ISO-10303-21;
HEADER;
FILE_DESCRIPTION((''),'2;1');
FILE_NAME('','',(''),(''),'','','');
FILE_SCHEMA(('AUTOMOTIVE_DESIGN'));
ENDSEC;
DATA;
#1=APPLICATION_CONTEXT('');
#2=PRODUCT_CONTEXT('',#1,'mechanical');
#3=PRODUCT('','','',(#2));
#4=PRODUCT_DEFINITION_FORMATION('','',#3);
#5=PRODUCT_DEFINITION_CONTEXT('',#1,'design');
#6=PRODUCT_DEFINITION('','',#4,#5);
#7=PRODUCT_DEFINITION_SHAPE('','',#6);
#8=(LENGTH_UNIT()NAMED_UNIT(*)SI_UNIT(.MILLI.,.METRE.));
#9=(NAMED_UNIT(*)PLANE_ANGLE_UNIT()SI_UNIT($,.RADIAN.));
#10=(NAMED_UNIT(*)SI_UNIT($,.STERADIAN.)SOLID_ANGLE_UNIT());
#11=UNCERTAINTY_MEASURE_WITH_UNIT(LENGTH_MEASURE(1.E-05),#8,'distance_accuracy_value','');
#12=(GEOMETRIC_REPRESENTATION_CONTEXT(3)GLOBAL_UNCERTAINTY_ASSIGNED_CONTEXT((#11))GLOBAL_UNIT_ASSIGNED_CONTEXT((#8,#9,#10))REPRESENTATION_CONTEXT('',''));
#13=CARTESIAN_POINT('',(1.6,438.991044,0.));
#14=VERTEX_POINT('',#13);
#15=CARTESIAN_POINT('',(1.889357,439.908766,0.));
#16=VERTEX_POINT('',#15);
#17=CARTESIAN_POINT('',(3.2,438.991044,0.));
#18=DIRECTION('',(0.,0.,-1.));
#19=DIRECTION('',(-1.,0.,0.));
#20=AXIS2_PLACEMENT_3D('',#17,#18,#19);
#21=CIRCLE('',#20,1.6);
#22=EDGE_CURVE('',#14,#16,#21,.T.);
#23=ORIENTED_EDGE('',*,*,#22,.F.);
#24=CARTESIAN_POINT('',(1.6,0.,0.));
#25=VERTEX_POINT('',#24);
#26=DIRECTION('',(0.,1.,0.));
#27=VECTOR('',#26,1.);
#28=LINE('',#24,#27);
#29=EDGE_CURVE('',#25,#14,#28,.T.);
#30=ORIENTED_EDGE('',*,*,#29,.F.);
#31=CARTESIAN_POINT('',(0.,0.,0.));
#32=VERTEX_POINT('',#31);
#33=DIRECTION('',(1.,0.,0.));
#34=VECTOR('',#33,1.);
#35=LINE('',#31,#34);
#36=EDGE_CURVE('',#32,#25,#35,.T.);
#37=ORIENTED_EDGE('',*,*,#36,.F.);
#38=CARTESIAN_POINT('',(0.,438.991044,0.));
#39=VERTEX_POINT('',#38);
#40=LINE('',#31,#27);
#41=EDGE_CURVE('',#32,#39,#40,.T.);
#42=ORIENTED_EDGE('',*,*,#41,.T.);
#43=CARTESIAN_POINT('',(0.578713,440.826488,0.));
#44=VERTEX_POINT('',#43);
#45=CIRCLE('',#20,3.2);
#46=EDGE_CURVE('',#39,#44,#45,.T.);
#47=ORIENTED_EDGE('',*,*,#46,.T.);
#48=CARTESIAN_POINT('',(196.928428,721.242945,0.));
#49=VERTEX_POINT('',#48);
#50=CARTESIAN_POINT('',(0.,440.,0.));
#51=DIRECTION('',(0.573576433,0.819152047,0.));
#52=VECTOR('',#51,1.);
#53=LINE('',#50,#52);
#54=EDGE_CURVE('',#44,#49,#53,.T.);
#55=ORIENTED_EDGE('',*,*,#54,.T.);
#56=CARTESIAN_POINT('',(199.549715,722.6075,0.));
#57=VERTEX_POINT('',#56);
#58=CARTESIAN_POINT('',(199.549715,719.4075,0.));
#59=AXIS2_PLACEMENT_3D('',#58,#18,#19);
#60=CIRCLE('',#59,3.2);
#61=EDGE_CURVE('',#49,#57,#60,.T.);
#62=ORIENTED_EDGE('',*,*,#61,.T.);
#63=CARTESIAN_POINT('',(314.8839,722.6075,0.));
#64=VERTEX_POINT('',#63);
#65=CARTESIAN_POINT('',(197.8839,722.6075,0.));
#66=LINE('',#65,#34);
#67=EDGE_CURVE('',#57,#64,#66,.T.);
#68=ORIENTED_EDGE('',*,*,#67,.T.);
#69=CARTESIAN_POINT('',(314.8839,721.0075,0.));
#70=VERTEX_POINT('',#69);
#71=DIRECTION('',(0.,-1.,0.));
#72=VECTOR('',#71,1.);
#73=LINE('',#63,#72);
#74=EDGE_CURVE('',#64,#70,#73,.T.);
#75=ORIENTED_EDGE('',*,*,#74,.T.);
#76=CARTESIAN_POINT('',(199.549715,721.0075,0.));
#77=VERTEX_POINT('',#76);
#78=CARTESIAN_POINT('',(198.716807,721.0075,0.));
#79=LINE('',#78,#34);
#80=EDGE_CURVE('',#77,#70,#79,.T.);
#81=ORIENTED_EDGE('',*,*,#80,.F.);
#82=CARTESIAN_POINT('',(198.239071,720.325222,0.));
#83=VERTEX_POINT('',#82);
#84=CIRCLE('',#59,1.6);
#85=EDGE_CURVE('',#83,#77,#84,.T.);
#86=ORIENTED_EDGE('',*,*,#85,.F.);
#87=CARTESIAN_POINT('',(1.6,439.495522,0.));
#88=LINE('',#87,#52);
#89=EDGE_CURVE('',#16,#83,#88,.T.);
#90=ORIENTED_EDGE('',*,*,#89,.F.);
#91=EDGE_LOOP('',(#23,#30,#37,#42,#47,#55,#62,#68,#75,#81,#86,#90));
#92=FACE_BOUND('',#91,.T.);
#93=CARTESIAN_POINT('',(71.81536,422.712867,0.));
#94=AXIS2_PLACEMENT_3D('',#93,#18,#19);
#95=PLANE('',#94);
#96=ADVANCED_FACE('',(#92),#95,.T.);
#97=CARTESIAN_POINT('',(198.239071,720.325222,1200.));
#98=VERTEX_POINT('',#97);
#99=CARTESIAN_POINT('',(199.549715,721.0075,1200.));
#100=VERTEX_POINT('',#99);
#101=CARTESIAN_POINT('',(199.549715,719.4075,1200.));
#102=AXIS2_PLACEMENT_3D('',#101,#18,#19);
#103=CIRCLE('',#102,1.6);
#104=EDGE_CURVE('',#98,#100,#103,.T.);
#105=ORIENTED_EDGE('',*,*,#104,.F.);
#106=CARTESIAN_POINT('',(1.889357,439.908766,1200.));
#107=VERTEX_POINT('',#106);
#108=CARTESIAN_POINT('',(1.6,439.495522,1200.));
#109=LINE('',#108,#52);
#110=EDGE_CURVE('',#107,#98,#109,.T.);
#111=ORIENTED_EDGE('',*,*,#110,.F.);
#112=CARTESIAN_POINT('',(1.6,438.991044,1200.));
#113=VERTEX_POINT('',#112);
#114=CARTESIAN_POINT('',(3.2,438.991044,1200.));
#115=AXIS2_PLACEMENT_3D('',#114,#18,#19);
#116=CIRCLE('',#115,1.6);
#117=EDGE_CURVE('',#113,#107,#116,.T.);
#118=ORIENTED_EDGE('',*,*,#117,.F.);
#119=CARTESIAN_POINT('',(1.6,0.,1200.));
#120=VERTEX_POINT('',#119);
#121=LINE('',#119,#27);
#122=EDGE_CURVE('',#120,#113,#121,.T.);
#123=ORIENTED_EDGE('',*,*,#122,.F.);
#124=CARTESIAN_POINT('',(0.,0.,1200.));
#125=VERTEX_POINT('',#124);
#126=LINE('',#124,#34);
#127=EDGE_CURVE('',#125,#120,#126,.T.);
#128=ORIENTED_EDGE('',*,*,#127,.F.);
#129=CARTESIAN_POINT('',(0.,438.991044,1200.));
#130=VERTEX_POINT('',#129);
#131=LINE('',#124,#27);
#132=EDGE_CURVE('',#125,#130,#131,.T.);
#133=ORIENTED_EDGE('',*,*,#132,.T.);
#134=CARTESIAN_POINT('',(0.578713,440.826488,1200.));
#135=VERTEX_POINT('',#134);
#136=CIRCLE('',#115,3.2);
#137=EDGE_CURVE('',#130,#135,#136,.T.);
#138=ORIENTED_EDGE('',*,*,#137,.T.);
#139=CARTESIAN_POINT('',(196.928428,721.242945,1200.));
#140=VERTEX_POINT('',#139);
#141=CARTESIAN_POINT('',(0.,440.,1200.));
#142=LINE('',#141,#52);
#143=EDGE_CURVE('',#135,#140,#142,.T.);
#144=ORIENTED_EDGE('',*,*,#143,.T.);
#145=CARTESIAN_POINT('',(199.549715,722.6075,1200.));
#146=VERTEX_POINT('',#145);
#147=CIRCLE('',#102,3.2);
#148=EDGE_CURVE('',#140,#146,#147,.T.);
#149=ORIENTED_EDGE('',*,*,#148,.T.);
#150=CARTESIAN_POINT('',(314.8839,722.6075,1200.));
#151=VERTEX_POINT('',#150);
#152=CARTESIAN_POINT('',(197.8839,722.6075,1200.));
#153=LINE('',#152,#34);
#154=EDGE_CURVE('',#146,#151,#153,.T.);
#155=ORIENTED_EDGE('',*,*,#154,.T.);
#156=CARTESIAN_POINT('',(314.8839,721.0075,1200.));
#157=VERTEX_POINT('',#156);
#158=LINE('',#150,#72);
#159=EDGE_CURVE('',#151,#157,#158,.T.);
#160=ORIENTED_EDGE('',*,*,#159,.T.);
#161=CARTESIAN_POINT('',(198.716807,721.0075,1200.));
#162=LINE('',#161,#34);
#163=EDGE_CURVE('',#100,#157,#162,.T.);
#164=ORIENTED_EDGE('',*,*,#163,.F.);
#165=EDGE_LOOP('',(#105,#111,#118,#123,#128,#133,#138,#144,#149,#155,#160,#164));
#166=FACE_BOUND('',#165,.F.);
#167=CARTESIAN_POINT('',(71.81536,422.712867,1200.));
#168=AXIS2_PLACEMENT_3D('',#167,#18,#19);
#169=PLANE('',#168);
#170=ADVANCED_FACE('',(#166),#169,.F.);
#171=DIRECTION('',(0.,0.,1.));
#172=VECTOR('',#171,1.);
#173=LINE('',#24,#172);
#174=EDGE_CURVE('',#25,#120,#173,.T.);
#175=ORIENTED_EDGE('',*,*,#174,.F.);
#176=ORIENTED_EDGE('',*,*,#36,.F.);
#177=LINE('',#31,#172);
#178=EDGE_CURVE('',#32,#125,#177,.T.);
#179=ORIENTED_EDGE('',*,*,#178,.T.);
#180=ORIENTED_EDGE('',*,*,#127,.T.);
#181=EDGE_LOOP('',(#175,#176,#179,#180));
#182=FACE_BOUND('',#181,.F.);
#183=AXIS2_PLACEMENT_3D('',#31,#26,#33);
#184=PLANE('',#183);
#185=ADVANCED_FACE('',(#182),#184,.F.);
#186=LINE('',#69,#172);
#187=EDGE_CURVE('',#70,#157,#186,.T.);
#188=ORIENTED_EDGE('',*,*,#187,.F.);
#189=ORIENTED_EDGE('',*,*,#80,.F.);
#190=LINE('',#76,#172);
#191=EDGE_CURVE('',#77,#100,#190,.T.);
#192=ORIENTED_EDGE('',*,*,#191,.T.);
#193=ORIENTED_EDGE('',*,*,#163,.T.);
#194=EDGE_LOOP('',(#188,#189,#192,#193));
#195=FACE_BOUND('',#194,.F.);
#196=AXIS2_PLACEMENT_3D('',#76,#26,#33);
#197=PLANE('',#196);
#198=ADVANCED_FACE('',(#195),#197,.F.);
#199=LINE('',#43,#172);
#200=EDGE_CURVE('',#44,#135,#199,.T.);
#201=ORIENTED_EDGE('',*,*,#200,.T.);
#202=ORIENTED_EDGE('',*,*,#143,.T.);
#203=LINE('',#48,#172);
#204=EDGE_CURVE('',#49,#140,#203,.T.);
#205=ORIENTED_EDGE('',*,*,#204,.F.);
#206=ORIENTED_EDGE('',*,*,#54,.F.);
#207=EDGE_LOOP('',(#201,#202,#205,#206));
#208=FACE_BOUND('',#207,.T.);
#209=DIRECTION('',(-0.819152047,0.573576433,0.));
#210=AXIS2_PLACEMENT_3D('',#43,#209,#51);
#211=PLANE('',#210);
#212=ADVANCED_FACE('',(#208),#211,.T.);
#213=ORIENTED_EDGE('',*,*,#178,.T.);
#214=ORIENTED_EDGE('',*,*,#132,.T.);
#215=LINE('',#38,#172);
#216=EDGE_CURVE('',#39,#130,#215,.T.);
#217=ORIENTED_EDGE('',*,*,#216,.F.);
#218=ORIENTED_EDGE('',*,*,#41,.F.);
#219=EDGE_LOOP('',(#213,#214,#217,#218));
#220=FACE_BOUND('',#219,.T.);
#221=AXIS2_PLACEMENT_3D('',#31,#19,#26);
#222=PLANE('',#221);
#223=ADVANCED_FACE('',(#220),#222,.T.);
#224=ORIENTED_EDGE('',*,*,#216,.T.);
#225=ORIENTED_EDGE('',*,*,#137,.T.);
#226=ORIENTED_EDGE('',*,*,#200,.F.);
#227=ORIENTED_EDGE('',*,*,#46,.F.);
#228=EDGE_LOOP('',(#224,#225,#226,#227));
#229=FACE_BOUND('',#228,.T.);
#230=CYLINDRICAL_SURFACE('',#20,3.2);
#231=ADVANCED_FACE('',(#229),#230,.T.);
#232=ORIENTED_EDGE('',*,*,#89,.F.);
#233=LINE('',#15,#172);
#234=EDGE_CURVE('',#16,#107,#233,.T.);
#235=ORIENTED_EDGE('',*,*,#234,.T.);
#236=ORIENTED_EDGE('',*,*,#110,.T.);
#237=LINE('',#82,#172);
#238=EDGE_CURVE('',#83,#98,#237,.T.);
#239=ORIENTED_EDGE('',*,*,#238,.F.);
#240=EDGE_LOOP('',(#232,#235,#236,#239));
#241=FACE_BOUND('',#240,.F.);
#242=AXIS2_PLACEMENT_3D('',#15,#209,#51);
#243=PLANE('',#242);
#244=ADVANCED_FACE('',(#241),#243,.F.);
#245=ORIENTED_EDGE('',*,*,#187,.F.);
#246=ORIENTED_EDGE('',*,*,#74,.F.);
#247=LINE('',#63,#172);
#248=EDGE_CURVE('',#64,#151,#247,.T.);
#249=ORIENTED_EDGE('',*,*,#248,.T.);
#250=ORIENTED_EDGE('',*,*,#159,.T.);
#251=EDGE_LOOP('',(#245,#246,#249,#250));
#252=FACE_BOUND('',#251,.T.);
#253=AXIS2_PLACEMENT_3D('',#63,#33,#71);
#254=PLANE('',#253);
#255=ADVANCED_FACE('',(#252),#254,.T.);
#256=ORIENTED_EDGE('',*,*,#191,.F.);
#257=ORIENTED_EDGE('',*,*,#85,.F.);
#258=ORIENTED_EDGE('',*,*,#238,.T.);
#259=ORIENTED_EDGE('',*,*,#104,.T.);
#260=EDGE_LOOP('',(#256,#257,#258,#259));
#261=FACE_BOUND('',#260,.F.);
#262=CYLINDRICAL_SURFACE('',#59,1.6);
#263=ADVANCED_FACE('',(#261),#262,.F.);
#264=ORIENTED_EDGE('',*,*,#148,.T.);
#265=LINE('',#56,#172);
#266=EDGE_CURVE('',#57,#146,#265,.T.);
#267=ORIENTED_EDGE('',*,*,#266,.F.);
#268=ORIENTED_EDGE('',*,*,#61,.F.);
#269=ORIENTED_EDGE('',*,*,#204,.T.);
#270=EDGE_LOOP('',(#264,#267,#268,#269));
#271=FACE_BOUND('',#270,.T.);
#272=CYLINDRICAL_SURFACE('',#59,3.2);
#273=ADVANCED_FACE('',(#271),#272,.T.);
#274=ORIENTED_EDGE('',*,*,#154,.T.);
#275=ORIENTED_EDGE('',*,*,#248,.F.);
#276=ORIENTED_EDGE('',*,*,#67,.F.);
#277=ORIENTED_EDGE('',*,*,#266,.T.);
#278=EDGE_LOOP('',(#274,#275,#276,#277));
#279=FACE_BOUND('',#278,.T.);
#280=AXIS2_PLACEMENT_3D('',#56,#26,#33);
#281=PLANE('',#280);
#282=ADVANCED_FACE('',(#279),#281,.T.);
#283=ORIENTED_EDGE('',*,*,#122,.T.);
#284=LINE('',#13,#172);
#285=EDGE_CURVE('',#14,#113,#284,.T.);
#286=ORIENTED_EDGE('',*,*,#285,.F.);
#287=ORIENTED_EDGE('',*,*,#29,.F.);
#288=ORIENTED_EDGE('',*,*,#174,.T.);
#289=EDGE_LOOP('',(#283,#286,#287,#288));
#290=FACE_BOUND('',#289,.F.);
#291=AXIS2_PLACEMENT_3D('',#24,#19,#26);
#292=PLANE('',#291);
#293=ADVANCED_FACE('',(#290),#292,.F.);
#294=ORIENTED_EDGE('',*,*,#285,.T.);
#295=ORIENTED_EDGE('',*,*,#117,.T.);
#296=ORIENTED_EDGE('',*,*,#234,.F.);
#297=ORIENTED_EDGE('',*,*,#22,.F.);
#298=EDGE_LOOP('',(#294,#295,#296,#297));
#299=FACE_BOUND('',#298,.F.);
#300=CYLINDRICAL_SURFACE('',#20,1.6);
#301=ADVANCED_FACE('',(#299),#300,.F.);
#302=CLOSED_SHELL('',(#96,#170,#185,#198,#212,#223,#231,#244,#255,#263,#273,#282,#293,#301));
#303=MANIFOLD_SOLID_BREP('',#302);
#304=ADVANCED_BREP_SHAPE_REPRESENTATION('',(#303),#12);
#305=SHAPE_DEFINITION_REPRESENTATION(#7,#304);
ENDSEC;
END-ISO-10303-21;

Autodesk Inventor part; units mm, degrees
ref_plane "YZ Plane" through (0, 0, 0) normal (1, 0, 0) x (0, 1, 0)
ref_plane "XZ Plane" through (0, 0, 0) normal (0, 1, 0) x (-1, 0, 0)
ref_plane "XY Plane" through (0, 0, 0) normal (0, 0, 1) x (1, 0, 0)
sketch "Sketch1" plane through (0, 0, 0) normal (0, 0, 1) x (1, 0, 0)
  line L0 (0, 0) -> (0, 440)
  line L1 (0, 440) -> (197.8839, 722.6075)
  line L2 (197.8839, 722.6075) -> (314.8839, 722.6075)
  dimension "d0" = 440
  dimension "d1" = 345
  dimension "d2" = 145
  dimension "d3" = 117
contour flange "Contour Flange1" sketch "Sketch1" thickness 1.6 bend radius 1.6 width 1200 along (0, 0, 1) mid plane no both sides no wall seen from (0, 220, 0) lies toward (1, 0, 0) curves L0 L1 L2
bend "Bend1"
corner "Corner1"
equation "\"d4\" = Thickness"
equation "\"d5\" = BendReliefWidth"
equation "\"d6\" = BendReliefDepth"
equation "\"d7\" = MinimumRemnant"
equation "\"d8\" = TransitionRadius"
equation "\"d10\" = BendRadius"
equation "\"d12\" = CornerReliefSize"
equation "\"d13\" = GapSize"
equation "\"d14\" = JacobiRadiusSize"
equation "\"BendRadius\" = Thickness"
equation "\"BendReliefWidth\" = Thickness"
equation "\"BendReliefDepth\" = 0.5 * Thickness"
equation "\"CornerReliefSize\" = 4 * Thickness"
equation "\"MinimumRemnant\" = 2 * Thickness"
equation "\"TransitionRadius\" = BendRadius"
equation "\"JacobiRadiusSize\" = BendRadius"
equation "\"GapSize\" = Thickness"
equation "\"Thickness\" = 1.6"
properties part number "Cover Front Witrh Center Point" material "Stainless Steel"
